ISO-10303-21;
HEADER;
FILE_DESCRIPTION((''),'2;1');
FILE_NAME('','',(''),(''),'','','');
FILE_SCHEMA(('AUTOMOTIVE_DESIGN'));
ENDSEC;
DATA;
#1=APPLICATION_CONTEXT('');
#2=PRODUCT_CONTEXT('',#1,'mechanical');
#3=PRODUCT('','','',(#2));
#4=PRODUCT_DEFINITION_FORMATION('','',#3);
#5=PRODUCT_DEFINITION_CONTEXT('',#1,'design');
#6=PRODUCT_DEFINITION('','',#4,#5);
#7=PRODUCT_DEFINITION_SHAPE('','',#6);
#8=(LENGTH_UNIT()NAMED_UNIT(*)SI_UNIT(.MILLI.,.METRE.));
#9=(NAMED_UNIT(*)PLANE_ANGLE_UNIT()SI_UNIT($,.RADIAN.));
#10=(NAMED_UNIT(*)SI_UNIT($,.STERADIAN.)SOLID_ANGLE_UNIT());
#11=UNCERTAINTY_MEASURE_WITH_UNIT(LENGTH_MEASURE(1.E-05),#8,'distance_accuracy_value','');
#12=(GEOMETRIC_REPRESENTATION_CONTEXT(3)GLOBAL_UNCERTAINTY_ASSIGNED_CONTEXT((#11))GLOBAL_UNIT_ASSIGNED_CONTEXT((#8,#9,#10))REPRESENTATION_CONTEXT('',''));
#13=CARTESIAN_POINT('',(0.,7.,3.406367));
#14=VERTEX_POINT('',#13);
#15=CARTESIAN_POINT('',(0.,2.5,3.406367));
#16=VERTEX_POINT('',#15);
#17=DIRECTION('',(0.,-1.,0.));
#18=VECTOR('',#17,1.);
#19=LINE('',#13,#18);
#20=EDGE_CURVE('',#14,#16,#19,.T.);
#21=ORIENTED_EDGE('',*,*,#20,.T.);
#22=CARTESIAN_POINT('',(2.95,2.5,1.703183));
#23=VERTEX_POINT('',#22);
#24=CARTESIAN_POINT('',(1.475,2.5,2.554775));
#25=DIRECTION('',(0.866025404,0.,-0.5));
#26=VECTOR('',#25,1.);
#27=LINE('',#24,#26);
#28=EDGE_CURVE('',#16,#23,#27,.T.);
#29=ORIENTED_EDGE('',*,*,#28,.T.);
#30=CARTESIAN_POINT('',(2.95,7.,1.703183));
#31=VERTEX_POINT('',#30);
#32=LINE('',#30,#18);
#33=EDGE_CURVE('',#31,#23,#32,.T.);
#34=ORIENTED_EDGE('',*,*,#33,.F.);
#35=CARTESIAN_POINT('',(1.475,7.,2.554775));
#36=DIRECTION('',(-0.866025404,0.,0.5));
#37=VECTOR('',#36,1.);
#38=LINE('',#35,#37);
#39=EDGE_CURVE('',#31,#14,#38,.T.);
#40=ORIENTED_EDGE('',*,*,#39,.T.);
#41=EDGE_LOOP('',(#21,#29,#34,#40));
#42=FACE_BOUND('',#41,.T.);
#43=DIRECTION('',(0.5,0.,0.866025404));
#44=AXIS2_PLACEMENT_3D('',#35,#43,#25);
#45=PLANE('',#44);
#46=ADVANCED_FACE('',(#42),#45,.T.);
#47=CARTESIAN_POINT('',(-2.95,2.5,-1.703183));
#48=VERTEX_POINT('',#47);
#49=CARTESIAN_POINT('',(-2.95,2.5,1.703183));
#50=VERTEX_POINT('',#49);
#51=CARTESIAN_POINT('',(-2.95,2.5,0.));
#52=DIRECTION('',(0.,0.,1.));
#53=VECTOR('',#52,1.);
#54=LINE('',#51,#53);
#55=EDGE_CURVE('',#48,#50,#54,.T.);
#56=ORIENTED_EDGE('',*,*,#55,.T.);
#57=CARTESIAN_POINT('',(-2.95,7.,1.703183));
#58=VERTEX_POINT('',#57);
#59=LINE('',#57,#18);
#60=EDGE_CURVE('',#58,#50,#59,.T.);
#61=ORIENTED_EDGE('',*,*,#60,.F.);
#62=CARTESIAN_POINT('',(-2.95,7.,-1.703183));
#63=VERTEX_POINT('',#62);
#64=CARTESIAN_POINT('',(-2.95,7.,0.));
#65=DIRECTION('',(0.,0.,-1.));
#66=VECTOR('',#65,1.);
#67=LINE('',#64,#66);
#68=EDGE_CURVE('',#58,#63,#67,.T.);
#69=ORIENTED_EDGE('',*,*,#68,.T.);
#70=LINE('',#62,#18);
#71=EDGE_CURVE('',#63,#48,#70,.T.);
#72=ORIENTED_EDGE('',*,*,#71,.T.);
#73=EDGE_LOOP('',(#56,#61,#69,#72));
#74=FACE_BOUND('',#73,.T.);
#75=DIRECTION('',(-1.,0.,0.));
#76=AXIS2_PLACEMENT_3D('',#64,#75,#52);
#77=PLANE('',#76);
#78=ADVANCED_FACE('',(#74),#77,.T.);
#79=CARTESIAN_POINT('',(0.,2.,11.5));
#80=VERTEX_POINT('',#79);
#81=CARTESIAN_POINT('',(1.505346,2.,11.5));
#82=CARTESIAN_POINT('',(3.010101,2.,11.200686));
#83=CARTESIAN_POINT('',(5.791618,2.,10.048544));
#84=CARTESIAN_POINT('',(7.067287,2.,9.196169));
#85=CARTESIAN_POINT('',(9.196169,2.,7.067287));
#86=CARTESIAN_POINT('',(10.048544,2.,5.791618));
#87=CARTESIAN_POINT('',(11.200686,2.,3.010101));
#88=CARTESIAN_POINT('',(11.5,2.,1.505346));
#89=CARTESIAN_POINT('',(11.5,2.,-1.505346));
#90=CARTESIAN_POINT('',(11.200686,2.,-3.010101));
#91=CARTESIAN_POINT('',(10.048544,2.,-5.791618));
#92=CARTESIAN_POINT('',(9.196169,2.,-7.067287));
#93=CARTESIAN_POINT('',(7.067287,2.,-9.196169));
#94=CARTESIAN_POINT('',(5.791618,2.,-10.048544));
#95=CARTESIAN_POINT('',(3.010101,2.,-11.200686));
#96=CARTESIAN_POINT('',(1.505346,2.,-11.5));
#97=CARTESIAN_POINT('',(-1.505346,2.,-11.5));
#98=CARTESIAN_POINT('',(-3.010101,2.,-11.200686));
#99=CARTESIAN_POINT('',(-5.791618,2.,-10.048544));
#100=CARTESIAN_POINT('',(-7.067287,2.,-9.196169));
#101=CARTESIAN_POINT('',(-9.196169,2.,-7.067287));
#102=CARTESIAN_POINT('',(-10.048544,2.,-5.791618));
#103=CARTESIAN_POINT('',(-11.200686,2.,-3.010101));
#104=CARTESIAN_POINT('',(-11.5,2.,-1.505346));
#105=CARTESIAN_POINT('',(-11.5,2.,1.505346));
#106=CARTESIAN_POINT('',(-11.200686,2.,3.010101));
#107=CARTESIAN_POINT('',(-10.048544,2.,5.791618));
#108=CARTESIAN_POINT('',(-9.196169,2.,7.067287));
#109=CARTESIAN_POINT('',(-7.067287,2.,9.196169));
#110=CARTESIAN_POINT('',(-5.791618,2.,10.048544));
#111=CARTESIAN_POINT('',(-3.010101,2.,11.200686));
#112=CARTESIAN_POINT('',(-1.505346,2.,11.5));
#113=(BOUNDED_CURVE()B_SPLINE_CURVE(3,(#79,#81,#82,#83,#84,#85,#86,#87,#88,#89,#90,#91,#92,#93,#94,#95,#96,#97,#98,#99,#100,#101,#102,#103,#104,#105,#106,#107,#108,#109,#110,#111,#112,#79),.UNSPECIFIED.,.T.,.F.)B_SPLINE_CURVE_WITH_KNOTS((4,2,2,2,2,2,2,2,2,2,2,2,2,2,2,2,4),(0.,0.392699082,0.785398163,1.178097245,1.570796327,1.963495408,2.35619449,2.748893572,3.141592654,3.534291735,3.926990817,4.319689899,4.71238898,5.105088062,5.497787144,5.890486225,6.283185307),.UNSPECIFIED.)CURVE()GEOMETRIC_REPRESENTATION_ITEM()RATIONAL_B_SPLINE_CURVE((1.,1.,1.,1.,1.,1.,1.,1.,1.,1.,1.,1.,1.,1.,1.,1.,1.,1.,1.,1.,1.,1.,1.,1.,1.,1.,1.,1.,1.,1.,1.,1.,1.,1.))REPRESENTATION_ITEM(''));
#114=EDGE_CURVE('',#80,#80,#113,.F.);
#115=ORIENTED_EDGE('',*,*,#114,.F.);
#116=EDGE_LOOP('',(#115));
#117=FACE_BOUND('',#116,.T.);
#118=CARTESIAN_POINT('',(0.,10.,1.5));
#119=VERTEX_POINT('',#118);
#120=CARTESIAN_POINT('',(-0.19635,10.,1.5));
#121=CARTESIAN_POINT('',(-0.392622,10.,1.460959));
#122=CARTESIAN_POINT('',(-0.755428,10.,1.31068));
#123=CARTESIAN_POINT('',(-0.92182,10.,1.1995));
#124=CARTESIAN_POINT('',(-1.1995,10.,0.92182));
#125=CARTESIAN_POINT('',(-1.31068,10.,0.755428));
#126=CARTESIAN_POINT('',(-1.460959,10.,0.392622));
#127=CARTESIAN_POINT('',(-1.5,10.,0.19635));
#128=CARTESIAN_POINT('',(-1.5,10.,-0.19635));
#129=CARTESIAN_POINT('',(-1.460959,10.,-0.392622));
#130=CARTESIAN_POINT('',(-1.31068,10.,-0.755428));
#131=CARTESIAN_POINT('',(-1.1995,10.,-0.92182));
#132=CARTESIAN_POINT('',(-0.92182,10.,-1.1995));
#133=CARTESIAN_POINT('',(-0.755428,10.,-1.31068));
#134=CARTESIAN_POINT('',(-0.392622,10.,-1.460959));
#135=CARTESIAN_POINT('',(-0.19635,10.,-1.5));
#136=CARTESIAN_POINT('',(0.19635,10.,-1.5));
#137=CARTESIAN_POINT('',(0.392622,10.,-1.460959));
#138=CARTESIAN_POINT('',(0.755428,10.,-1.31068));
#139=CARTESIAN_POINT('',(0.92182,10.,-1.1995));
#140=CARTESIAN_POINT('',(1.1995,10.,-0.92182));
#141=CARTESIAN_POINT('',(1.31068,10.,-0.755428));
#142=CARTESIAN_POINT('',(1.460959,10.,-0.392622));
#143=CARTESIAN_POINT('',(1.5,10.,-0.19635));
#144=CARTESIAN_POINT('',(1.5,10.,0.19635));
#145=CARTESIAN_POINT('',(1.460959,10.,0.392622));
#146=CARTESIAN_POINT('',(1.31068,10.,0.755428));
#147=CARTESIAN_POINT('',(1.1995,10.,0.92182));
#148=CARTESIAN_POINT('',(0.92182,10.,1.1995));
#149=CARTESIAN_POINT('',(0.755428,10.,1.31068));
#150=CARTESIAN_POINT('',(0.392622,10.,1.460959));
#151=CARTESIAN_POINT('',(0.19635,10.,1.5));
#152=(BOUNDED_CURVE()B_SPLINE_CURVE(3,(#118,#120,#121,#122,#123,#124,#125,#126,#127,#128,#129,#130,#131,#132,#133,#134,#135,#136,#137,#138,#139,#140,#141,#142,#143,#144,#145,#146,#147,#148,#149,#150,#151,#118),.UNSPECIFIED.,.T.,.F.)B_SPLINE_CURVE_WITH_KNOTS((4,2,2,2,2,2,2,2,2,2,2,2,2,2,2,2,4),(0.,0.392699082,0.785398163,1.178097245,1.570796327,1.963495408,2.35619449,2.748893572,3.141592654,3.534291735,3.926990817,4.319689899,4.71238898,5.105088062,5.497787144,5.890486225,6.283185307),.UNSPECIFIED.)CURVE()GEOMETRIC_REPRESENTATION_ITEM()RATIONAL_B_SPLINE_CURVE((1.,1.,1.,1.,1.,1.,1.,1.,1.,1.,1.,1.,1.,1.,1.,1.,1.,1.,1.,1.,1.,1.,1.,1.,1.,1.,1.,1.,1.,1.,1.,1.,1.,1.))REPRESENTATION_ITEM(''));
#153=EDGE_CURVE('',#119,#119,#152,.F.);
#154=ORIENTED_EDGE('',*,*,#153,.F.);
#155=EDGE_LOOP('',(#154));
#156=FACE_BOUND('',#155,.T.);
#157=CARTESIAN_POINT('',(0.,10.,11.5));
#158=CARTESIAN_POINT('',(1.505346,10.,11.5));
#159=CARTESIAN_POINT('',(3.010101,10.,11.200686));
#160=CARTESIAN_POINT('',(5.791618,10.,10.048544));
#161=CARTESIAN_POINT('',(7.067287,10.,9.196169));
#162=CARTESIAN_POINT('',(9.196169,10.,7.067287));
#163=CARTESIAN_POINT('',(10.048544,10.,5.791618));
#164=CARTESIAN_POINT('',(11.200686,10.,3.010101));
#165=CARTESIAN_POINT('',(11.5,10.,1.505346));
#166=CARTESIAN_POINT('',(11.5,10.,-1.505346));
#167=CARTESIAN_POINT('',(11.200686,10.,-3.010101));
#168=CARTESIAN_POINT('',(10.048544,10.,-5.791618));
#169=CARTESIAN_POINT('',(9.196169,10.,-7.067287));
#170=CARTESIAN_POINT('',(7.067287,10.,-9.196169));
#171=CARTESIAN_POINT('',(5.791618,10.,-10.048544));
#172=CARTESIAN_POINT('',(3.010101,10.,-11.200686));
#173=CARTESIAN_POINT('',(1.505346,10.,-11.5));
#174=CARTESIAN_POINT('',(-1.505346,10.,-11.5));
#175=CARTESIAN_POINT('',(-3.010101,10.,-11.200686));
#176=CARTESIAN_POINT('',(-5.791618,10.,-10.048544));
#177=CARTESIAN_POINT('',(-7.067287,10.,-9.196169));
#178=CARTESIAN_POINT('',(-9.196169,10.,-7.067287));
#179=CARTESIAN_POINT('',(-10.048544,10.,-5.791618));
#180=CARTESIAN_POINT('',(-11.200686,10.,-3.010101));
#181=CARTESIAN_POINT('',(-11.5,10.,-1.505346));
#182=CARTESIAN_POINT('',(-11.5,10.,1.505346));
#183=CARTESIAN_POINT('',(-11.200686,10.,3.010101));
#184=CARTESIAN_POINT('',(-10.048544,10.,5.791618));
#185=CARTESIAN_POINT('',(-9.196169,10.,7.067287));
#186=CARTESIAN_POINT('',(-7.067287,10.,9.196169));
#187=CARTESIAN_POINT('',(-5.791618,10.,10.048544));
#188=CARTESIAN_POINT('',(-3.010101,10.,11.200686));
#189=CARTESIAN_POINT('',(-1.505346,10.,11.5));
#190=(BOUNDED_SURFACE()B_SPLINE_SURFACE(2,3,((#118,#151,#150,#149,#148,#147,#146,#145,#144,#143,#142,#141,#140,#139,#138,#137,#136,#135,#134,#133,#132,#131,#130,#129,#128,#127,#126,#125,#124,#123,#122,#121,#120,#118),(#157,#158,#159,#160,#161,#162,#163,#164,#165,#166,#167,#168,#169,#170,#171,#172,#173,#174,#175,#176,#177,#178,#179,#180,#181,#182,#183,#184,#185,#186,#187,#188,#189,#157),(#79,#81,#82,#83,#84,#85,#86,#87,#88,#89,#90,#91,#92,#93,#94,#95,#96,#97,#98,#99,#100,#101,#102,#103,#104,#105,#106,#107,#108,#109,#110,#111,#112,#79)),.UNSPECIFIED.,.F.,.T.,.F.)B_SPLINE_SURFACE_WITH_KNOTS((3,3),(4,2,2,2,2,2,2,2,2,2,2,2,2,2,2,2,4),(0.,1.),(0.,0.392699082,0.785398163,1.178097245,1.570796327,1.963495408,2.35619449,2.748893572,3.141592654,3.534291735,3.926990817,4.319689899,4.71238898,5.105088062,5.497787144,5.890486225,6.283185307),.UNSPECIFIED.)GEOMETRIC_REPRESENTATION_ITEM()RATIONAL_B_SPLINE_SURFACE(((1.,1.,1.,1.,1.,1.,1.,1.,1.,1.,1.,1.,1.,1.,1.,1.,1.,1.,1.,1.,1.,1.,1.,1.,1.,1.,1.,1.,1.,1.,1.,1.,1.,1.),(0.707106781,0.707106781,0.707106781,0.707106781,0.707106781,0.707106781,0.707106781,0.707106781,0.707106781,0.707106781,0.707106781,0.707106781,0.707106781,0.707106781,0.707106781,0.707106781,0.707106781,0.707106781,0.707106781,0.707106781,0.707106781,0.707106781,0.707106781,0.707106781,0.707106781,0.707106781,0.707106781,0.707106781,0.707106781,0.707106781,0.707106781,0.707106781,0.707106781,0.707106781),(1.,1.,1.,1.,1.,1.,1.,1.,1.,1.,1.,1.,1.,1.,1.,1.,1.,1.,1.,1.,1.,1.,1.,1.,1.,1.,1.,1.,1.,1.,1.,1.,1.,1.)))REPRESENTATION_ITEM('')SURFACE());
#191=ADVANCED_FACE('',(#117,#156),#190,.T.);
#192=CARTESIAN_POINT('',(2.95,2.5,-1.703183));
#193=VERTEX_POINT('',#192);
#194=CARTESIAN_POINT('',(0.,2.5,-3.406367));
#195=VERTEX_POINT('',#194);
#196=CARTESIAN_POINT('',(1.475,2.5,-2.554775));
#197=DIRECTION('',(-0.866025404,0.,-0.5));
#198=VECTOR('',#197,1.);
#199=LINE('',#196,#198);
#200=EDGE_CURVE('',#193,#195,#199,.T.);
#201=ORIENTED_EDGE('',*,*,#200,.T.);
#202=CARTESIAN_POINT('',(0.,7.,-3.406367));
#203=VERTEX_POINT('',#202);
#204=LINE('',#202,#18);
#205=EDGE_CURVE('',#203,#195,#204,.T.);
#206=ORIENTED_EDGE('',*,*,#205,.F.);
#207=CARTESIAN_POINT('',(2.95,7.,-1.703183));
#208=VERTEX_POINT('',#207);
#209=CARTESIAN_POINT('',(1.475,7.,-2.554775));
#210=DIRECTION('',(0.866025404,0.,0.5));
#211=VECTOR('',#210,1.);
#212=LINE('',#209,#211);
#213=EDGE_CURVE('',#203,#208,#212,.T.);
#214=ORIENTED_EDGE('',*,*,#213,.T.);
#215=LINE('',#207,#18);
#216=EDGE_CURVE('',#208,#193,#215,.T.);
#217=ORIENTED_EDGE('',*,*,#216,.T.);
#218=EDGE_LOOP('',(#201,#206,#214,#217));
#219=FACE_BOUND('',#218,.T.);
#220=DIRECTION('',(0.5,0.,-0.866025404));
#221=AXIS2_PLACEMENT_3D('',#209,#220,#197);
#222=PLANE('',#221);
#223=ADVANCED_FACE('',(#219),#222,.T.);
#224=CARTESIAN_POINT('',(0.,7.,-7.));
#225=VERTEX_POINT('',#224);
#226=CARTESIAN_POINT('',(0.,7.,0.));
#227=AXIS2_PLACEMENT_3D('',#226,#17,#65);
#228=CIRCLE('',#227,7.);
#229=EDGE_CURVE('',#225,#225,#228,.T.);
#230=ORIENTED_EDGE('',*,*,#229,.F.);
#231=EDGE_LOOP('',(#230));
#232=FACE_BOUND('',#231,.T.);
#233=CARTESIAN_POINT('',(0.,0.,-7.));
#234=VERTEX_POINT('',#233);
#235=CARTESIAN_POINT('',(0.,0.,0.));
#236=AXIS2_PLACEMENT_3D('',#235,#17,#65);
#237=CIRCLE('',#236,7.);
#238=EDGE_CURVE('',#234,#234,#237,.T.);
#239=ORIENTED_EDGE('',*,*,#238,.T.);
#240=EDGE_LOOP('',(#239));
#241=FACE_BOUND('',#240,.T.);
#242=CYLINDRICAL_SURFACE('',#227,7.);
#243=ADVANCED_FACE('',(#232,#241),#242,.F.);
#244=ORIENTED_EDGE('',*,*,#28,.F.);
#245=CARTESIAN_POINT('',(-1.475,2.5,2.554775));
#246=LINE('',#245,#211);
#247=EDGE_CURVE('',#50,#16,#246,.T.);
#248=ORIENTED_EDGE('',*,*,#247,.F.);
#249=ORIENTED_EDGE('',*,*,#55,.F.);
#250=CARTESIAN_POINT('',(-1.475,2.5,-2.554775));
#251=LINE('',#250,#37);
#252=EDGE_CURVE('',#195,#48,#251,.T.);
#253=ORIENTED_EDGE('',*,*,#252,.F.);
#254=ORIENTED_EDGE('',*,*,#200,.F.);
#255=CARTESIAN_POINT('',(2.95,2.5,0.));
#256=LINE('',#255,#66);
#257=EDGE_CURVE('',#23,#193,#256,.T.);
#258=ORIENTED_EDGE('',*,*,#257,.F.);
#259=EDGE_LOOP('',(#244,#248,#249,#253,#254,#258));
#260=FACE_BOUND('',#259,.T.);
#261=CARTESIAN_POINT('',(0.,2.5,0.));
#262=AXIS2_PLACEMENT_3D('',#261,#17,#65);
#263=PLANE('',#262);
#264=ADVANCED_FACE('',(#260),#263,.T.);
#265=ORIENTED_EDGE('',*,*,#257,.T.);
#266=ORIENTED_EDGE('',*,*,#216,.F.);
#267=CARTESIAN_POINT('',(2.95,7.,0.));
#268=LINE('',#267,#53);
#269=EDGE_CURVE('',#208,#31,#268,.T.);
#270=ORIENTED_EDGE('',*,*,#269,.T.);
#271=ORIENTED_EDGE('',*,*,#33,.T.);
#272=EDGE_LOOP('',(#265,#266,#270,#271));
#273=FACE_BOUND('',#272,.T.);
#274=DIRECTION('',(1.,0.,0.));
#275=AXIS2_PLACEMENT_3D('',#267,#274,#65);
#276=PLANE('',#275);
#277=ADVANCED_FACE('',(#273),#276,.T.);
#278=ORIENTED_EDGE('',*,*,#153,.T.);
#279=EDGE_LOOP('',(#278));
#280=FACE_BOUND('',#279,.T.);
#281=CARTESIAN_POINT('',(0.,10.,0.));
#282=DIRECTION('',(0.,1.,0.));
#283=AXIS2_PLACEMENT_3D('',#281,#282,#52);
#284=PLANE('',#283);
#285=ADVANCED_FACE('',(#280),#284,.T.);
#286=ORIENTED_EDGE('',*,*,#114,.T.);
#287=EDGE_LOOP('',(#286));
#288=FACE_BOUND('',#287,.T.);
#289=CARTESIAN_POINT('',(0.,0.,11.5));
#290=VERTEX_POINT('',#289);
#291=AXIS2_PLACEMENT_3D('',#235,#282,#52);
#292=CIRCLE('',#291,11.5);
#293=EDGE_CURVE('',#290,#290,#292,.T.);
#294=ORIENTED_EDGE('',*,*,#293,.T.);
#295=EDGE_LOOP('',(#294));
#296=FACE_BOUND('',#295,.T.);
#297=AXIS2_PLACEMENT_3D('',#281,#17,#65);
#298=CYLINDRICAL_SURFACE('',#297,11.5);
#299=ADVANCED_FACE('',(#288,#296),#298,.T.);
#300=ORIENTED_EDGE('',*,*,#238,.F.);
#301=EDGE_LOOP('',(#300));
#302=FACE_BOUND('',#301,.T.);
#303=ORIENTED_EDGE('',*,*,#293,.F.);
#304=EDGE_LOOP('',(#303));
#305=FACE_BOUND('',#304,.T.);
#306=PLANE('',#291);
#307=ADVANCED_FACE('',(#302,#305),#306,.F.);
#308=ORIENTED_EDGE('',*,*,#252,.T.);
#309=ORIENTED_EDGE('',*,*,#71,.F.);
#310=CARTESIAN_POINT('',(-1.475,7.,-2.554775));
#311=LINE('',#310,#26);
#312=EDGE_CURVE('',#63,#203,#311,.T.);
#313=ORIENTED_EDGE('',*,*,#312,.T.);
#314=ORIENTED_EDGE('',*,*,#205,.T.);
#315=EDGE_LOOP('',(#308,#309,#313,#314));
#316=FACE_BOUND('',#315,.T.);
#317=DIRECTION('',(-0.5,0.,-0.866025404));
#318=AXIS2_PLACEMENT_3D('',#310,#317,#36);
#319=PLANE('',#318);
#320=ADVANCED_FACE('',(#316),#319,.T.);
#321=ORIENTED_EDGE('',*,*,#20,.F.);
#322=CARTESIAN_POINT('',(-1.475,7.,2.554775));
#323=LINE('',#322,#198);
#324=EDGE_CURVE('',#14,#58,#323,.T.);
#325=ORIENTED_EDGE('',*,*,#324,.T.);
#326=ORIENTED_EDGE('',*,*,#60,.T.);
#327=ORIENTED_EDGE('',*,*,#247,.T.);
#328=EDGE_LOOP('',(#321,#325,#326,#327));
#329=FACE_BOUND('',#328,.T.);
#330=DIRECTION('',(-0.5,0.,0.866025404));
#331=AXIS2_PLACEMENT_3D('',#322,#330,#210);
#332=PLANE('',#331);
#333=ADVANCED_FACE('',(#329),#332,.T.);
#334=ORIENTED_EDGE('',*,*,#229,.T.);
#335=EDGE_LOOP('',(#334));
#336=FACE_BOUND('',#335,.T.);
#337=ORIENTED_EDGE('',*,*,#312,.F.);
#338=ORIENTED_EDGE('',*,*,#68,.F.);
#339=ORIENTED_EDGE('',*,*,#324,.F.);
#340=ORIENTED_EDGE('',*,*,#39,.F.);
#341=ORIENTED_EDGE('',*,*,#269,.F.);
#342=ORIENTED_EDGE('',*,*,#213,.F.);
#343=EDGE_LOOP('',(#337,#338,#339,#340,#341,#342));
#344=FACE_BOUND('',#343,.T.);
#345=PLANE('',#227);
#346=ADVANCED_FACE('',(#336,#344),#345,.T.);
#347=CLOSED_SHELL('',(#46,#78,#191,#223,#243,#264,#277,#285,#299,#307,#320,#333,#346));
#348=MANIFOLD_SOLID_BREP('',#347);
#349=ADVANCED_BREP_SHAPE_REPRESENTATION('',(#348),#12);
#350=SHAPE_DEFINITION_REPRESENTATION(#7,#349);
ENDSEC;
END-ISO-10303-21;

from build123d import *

# Parameters (mm, degrees)
SKETCH1_R           = 11.5
BOSS_EXTRUDE1_DEPTH = 10
FILLET1_SIZE        = 8
FILLET1_SIZE_2      = 10
SKETCH2_R           = 7
CUT_EXTRUDE1_DEPTH  = 7
SKETCH3_R           = 4.558249482
CUT_EXTRUDE2_DEPTH  = 2.5


with BuildPart() as part:
    # Sketch1 → Boss-Extrude1 (new body)
    with BuildSketch(Plane(origin=(0, 0, 0), x_dir=(1, 0, 0), z_dir=(0, 1, 0))):
        with Locations(Location((0, 0, 0), (0, 0, 270))):
            Circle(SKETCH1_R)
    extrude(amount=BOSS_EXTRUDE1_DEPTH)

    # Fillet1
    # an asymmetric fillet: 10, 8 mm, written as the material it takes off along each edge
    with BuildSketch(Plane(origin=(0, 10, 0), x_dir=(0, 0, 1), z_dir=(-1, 0, 0))) as fillet1_piece_1:
        with BuildLine():
            Bezier((11.5, -FILLET1_SIZE), (11.5, 0), (11.5 - FILLET1_SIZE_2, 0), weights=[1, 0.707106781, 1])
            Line((11.5 - FILLET1_SIZE_2, 0), (11.5, 0))
            Line((11.5, 0), (11.5, -FILLET1_SIZE))
        make_face()
    revolve(axis=Axis((0, 10, 0), (0, 1, 0)), mode=Mode.SUBTRACT)

    # Sketch2 → Cut-Extrude1 (cut)
    with BuildSketch(Plane.XZ):
        with Locations(Location((0, 0, 0), (0, 0, 270))):
            Circle(SKETCH2_R)
        Polygon((2.95, -1.703183294), (2.95, 1.703183294), (0, 3.406366588), (-2.95, 1.703183294), (-2.95, -1.703183294), (0, -3.406366588), align=None, mode=Mode.SUBTRACT)
    extrude(amount=-CUT_EXTRUDE1_DEPTH, mode=Mode.SUBTRACT)

    # Sketch3 → Cut-Extrude2 (cut)
    with BuildSketch(Plane.XZ):
        Circle(SKETCH3_R)
    extrude(amount=-CUT_EXTRUDE2_DEPTH, mode=Mode.SUBTRACT)


solid = part.part
